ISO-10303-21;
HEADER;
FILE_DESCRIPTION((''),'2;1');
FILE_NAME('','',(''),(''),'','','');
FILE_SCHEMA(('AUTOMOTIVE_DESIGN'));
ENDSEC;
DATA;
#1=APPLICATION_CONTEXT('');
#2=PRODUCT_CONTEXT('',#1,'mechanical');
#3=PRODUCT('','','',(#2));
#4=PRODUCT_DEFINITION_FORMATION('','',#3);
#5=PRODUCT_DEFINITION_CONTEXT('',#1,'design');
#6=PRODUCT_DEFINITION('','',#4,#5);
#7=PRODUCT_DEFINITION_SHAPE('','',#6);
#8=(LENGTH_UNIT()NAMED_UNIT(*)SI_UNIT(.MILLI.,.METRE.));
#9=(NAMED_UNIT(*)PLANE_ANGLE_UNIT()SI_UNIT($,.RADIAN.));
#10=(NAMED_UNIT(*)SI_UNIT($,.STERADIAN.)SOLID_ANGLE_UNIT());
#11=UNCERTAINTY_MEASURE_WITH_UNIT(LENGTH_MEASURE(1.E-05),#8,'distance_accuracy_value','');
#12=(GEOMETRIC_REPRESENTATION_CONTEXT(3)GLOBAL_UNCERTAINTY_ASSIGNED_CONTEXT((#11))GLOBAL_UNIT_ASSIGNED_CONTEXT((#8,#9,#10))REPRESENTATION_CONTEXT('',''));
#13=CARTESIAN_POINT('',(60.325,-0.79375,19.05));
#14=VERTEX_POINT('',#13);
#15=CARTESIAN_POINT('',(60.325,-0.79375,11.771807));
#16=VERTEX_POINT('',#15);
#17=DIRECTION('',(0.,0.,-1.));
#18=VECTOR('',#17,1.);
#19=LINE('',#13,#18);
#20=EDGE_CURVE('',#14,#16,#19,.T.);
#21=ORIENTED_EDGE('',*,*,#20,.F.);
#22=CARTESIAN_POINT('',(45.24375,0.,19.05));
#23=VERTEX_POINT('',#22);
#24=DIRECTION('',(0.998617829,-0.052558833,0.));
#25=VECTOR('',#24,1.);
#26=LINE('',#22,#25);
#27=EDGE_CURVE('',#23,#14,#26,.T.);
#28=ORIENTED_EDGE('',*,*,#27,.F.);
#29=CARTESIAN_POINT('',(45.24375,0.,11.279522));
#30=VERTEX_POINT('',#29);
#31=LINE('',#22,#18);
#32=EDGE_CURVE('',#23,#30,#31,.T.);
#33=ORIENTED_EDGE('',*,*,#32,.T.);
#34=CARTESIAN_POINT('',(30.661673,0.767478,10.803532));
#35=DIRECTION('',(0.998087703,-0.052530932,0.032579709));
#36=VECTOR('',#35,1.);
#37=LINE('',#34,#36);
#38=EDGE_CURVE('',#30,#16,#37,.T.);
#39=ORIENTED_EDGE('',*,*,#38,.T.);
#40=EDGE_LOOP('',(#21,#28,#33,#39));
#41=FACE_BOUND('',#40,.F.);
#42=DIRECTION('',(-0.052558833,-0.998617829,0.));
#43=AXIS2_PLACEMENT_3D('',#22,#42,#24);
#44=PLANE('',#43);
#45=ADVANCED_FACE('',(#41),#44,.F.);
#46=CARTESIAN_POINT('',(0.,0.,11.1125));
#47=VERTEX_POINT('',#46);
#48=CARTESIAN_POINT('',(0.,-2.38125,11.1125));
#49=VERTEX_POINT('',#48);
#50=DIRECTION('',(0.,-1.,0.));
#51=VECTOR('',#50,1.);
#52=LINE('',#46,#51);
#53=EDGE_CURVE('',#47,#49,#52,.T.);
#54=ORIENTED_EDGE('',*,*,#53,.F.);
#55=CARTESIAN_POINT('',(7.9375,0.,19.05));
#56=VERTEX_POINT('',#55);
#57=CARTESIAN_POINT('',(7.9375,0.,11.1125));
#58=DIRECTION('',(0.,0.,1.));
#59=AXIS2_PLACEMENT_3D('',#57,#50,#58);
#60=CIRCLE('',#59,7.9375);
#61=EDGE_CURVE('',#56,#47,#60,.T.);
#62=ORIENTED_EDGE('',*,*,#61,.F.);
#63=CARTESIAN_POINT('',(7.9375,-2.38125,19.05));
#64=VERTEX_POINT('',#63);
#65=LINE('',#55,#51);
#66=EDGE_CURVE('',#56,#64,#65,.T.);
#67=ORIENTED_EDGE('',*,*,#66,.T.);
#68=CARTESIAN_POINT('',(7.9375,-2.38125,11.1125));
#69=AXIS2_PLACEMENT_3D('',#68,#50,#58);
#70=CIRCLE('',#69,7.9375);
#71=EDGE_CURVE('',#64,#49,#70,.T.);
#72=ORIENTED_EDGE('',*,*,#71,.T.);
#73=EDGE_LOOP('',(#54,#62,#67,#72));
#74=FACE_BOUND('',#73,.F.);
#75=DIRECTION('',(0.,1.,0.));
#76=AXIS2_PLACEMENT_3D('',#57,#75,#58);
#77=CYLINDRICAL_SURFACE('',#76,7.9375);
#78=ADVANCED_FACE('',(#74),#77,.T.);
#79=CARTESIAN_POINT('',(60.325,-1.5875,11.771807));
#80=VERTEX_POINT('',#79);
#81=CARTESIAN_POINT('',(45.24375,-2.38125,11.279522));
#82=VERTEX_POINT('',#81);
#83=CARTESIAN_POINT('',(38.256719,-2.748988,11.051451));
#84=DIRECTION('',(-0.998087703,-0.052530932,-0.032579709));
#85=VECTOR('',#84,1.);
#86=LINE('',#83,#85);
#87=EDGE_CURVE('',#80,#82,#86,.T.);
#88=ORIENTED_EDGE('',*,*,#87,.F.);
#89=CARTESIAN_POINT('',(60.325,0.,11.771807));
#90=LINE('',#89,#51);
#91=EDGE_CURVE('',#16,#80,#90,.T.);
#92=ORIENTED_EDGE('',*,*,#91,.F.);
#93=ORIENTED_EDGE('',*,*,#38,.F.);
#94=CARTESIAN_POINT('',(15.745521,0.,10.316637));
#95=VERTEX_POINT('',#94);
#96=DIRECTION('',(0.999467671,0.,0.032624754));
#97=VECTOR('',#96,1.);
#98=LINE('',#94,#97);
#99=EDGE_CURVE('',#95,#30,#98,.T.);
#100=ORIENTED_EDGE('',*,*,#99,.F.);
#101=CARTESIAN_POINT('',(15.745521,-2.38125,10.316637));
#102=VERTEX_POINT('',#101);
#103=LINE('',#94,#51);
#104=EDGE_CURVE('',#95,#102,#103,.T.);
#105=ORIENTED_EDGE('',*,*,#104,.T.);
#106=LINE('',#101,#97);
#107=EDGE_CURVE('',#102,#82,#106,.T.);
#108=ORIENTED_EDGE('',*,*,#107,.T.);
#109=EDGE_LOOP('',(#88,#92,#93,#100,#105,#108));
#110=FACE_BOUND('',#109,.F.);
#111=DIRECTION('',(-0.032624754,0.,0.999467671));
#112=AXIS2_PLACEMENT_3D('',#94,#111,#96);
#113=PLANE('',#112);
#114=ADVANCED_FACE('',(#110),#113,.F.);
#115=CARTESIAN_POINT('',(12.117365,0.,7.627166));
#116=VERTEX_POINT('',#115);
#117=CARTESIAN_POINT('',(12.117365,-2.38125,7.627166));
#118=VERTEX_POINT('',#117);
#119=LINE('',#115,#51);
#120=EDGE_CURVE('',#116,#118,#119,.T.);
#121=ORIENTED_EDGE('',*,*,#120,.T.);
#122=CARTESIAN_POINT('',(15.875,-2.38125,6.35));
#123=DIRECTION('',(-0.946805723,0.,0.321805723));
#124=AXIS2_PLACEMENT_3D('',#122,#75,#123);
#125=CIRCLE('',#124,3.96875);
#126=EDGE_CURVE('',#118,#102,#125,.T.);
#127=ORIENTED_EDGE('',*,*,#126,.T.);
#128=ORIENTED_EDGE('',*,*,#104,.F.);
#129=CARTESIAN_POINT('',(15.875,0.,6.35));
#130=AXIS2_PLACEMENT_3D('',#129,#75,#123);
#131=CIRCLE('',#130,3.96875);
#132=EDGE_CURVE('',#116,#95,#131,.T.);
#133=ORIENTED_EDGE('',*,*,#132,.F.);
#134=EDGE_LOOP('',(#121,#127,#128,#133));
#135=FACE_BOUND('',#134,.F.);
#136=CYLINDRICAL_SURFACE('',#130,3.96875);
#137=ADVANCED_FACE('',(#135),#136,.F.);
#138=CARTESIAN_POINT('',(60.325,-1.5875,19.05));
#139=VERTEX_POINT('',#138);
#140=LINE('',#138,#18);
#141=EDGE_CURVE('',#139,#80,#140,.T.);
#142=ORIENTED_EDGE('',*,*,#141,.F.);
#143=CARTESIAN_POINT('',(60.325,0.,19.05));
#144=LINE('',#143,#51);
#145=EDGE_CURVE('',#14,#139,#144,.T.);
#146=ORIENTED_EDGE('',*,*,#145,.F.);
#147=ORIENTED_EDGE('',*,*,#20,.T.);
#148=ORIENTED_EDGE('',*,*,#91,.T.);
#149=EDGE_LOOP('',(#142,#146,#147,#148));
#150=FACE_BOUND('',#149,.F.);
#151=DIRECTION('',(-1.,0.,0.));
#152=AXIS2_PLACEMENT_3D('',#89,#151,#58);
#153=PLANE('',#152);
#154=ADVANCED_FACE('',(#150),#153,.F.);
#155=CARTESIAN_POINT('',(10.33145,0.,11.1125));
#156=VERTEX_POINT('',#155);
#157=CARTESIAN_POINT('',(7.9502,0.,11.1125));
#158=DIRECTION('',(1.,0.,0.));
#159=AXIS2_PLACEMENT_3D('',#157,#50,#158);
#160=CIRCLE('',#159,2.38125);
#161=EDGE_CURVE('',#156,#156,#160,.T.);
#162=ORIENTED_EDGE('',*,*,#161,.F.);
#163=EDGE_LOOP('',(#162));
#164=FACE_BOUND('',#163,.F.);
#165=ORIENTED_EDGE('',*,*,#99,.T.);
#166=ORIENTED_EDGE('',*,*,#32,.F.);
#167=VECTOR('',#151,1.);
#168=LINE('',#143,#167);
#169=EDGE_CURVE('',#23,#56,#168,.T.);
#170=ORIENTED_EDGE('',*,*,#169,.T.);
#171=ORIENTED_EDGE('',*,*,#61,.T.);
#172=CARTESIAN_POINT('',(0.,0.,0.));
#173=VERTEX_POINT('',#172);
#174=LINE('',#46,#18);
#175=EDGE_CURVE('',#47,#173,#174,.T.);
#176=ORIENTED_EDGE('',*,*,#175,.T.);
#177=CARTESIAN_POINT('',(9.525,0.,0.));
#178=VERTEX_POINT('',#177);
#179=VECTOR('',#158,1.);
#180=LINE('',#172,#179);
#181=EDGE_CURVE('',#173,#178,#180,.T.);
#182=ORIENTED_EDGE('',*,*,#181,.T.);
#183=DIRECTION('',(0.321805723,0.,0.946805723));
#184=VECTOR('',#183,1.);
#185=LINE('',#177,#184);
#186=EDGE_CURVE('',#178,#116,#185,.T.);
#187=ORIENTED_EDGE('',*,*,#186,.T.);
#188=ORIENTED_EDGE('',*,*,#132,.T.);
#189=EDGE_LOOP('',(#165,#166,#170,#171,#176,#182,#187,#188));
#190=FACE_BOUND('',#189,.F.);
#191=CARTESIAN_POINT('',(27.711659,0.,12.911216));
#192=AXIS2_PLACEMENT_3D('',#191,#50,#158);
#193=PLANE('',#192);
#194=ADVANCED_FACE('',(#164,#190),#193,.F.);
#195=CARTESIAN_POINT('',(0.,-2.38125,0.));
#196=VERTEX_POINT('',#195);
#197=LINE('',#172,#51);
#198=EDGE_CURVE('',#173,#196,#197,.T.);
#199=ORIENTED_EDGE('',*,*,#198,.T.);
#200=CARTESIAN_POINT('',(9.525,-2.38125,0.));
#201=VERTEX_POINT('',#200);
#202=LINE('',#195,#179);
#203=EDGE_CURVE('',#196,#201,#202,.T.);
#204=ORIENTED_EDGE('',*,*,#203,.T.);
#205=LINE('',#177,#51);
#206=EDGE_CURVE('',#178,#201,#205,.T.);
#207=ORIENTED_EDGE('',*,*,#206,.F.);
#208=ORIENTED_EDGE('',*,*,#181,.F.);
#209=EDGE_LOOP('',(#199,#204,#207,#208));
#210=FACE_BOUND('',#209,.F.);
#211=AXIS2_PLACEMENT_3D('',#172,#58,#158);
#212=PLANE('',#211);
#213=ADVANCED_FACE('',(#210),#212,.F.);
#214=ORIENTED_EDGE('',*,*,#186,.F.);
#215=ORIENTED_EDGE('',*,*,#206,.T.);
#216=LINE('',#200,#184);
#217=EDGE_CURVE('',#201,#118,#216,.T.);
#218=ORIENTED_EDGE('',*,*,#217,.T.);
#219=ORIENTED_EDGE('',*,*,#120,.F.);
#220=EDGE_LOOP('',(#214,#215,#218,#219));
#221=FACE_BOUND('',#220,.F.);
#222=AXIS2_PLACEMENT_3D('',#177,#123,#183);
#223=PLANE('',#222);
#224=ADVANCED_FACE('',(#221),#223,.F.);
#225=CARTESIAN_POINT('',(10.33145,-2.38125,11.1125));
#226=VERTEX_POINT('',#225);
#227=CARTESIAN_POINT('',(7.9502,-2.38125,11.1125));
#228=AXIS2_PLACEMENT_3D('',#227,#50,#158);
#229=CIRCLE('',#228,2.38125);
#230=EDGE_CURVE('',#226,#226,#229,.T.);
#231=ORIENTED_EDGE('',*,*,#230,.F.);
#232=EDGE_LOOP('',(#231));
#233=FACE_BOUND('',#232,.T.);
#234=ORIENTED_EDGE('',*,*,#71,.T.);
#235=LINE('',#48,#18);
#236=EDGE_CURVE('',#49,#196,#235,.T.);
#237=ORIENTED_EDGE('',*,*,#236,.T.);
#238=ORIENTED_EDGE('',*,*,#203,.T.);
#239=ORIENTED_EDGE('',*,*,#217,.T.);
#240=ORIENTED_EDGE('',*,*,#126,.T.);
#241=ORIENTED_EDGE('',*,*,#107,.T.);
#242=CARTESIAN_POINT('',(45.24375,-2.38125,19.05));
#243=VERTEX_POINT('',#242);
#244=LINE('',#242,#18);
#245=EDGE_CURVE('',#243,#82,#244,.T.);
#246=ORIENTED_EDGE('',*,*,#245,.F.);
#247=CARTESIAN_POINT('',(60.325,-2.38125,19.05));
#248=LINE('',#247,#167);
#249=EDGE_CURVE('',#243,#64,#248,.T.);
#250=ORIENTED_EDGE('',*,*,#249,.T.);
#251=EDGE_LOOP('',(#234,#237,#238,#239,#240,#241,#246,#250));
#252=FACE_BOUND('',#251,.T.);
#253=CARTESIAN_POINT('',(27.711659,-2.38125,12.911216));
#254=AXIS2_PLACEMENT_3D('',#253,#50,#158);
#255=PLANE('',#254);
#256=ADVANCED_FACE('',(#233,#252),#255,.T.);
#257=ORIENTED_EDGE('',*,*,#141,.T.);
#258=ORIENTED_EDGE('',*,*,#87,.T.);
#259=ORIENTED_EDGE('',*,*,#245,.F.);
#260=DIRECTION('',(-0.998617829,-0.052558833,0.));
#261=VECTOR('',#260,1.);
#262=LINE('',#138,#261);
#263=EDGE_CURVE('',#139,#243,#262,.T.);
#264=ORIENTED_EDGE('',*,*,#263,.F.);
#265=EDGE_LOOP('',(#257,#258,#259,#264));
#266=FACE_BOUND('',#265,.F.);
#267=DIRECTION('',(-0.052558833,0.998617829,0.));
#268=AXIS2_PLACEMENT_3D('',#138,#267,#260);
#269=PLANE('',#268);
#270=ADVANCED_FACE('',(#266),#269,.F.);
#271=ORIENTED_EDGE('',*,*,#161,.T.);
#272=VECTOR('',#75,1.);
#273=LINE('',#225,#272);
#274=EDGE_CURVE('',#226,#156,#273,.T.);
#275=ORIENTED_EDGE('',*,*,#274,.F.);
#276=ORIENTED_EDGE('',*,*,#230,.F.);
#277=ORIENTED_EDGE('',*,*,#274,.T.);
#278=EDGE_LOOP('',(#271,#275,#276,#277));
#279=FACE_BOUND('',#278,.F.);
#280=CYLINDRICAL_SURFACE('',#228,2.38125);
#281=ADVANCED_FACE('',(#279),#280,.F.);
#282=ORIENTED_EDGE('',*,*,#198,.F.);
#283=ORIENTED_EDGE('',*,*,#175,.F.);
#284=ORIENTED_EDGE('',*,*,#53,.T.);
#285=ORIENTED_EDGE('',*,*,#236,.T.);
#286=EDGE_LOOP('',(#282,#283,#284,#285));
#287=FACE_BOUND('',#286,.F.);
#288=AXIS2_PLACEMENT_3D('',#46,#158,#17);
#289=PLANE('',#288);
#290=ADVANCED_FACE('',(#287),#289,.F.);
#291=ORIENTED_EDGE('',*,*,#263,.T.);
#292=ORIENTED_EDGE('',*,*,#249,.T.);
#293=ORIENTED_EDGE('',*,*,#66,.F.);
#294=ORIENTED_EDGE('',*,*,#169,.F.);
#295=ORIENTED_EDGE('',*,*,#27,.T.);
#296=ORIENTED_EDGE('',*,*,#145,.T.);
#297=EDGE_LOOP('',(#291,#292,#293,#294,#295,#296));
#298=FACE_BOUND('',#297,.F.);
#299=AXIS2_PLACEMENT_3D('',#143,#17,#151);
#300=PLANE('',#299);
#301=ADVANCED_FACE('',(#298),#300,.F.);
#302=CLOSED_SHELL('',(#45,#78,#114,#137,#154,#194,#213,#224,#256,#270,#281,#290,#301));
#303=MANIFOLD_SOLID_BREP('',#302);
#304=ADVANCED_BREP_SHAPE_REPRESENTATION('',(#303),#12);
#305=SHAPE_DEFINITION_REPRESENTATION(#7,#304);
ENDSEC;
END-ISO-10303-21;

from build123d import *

# Parameters (mm, degrees)
F1_DEPTH = 2.38125
F2_R     = 2.38125
F3_DEPTH = 25.4
F5_DEPTH = 25.4


# Not quite as in the source:
# - a length typed as a fraction of an inch, garbled in the dataset ("3 / 203.2 mm" for 3/8 in), is restored


with BuildPart() as f1:
    # F0 (on Front) → F1 (new body)
    with BuildSketch(Plane.XZ):
        with BuildLine():
            Line((60.325, 19.05), (7.9375, 19.05))
            ThreePointArc((7.9375, 19.05), (2.3248399243, 16.7251600757), (0, 11.1125))
            Line((0, 11.1125), (0, 0))
            Line((0, 0), (9.525, 0))
            Line((9.525, 0), (12.1173647876, 7.6271664624))
            ThreePointArc((12.1173647876, 7.6271664624), (13.511585403, 9.5382986066), (15.7455205062, 10.3166373193))
            Line((15.7455205062, 10.3166373193), (60.325, 11.7718065158))
            Line((60.325, 11.7718065158), (60.325, 19.05))
        make_face()
    extrude(amount=F1_DEPTH)

    # F2 (on face) → F3 (cut)
    with BuildSketch(Plane.XZ.offset(2.38125)):
        with Locations((7.9502, 11.1125)):
            Circle(F2_R)
    extrude(amount=-F3_DEPTH, mode=Mode.SUBTRACT)

    # F4 (on face) → F5 (cut)
    with BuildSketch(Plane.XY.offset(19.05)):
        Polygon((45.24375, 0), (60.325, -0.79375), (60.325, 0), align=None)
        Polygon((60.325, -2.38125), (60.325, -1.5875), (45.24375, -2.38125), align=None)
    extrude(amount=-F5_DEPTH, mode=Mode.SUBTRACT)


solid = f1.part
